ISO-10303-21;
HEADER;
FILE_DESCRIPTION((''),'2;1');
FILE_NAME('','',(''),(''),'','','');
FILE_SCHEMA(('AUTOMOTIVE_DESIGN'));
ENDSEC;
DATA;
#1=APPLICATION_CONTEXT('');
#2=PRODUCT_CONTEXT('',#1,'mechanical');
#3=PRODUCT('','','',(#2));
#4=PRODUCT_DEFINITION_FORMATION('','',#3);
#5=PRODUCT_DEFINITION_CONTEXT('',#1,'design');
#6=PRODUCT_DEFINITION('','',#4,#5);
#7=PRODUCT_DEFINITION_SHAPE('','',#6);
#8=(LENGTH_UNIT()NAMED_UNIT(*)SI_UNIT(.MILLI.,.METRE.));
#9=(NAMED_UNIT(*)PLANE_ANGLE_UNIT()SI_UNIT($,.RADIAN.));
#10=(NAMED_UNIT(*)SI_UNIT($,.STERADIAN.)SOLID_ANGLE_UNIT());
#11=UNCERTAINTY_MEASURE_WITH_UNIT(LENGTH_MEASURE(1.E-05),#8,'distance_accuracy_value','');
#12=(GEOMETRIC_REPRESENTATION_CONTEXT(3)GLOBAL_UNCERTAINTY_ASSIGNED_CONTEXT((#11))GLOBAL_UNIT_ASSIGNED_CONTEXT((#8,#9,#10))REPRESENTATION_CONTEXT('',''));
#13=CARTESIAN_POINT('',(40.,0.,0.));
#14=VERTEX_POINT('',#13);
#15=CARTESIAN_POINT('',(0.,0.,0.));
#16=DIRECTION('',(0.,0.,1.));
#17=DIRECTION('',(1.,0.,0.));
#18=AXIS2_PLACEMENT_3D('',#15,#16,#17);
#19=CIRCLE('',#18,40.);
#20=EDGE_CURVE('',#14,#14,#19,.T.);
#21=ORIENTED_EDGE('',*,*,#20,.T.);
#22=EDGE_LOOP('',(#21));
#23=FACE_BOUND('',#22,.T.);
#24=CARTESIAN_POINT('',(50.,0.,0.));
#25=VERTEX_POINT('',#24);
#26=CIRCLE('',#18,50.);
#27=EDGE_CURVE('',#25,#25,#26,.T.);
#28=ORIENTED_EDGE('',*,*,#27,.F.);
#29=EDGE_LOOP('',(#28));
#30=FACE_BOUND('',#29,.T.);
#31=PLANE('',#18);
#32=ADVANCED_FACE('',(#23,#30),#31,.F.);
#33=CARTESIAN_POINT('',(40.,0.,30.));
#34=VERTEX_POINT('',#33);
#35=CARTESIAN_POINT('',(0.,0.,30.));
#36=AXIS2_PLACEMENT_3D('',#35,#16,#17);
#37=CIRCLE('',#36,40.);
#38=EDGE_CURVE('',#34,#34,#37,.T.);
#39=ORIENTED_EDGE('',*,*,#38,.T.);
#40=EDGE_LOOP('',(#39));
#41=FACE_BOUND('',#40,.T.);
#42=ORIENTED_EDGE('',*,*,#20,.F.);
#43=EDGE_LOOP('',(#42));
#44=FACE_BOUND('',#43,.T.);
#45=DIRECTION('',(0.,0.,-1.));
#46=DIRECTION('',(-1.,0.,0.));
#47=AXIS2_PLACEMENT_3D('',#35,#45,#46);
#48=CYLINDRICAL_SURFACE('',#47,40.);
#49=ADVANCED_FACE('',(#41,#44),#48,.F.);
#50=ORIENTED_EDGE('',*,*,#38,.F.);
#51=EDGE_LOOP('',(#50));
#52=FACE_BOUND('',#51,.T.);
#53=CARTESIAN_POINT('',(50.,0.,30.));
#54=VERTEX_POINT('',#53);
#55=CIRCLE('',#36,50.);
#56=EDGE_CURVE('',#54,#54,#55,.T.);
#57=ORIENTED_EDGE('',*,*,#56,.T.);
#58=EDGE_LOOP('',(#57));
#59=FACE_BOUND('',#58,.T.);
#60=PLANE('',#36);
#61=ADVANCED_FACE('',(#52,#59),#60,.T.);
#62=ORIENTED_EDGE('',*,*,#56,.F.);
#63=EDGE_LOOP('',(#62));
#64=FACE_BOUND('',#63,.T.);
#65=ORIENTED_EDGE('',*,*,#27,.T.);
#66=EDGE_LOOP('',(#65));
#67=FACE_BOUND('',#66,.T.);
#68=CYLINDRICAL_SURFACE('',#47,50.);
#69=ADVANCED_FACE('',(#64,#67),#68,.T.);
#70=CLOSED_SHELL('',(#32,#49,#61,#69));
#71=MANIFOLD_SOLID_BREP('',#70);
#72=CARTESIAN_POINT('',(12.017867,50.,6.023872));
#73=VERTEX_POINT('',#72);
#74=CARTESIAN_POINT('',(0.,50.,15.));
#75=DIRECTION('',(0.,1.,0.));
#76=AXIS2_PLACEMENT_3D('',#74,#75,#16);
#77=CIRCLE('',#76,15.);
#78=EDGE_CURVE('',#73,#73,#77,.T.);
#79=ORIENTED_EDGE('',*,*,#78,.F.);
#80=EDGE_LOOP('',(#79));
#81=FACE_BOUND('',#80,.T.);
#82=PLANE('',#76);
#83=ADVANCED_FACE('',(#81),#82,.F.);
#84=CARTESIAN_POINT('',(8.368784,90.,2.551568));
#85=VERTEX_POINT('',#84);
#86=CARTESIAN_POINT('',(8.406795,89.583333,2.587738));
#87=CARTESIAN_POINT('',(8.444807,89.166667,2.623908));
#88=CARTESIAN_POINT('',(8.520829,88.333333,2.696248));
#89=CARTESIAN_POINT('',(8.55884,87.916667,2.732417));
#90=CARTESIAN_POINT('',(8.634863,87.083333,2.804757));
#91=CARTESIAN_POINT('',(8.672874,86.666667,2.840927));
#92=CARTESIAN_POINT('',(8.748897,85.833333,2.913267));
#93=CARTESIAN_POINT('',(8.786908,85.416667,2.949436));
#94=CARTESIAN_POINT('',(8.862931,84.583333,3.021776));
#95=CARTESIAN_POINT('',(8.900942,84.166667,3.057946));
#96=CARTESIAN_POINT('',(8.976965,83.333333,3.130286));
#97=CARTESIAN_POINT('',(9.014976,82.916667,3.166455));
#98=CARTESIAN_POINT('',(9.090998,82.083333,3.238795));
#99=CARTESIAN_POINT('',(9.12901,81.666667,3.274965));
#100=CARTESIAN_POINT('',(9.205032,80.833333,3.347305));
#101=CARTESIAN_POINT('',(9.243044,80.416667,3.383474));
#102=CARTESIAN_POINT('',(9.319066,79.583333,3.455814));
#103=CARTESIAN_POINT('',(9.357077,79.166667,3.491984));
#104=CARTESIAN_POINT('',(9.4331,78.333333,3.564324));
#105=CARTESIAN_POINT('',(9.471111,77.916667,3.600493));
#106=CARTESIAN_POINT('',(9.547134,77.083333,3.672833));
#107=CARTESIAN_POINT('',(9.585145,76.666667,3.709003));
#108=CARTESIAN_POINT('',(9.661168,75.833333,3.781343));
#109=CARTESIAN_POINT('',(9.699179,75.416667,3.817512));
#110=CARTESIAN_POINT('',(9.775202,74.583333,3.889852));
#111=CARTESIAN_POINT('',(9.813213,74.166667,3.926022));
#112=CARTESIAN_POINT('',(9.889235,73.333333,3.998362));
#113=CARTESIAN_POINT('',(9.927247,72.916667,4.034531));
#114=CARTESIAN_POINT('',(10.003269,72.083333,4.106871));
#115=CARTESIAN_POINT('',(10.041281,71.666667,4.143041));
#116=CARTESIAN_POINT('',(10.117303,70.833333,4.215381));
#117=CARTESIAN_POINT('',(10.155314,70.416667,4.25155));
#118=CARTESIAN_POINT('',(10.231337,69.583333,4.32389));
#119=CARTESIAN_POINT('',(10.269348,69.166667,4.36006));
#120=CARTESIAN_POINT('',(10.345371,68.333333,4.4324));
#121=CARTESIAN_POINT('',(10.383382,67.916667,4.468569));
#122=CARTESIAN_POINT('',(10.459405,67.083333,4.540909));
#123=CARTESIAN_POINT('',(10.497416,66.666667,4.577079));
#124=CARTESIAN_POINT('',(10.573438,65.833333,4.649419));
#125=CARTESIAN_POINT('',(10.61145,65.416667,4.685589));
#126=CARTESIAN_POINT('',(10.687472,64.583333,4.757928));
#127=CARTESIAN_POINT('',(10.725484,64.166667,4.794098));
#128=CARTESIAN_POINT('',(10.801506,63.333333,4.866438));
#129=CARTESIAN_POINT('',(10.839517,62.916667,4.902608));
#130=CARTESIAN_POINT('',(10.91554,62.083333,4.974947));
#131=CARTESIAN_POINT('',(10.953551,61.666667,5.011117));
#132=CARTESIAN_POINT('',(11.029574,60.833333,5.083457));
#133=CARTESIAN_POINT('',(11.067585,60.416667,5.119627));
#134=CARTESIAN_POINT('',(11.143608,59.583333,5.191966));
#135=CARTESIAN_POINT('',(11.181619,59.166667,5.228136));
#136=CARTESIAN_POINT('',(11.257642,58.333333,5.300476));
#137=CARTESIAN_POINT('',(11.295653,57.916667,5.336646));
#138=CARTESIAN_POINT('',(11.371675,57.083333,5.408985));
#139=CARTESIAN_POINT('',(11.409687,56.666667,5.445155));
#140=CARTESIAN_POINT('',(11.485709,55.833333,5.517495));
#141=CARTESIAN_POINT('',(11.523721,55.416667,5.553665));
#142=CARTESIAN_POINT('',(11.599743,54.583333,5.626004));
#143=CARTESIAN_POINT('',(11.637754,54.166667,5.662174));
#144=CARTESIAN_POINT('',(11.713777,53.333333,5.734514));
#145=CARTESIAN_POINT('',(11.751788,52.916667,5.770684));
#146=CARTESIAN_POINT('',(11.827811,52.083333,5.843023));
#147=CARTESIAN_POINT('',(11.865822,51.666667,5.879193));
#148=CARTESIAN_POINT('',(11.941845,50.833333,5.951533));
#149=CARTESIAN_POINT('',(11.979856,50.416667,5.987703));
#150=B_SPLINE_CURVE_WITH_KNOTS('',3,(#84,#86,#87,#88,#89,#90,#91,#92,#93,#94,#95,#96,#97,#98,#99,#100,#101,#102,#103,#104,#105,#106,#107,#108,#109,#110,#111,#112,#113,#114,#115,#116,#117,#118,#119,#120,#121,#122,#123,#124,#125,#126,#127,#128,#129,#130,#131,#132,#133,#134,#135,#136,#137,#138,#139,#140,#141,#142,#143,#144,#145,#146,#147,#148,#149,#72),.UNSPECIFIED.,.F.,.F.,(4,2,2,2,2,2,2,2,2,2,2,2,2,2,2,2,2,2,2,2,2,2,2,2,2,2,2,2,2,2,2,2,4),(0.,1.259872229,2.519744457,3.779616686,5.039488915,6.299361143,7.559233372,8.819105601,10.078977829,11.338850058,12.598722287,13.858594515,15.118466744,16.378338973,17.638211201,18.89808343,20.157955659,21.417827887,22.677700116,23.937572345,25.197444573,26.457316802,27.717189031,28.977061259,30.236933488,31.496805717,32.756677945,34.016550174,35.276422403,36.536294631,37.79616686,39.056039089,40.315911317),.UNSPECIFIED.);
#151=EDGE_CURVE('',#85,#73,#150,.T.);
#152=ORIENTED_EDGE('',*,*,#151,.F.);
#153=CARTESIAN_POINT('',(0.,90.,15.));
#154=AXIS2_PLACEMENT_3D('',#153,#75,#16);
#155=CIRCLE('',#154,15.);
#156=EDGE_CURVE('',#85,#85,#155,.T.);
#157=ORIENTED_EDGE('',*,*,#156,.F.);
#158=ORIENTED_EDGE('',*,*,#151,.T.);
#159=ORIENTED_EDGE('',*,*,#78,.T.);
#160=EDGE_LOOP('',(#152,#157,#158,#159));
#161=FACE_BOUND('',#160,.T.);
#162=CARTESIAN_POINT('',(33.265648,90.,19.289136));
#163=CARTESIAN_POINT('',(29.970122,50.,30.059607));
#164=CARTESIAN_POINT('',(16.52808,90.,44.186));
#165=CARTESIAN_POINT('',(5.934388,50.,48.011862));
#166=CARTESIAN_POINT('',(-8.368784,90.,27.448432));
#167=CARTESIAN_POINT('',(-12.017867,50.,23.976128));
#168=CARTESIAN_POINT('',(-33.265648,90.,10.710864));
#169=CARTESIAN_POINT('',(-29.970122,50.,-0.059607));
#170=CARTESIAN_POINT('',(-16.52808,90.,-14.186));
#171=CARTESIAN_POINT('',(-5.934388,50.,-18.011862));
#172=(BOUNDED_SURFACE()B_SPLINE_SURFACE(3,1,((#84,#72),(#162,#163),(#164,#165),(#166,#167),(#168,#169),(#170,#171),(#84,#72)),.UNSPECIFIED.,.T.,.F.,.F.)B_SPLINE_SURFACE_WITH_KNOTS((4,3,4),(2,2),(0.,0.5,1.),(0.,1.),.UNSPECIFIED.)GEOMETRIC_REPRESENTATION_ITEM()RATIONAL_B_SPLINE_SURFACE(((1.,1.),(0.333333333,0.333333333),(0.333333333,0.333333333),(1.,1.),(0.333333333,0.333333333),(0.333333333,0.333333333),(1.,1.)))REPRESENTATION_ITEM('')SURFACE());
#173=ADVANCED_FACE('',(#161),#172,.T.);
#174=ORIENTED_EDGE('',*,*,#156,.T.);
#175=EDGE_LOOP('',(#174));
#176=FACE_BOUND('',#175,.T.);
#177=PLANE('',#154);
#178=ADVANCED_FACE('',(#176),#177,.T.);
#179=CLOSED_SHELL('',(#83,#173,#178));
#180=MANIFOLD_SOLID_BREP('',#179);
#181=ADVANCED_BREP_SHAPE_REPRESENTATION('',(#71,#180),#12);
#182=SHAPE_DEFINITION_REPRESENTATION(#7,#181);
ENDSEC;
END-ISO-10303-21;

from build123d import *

# Parameters (mm, degrees)
SKETCH1_R           = 50
SKETCH1_R_2         = 40
BOSS_EXTRUDE1_DEPTH = 30


with BuildPart() as part:
    # Sketch1 → Boss-Extrude1 (new body)
    with BuildSketch(Plane.XY):
        Circle(SKETCH1_R)
        Circle(SKETCH1_R_2, mode=Mode.SUBTRACT)
    extrude(amount=BOSS_EXTRUDE1_DEPTH)


with BuildPart() as body_2:
    # Loft1: read off the stored shape, not the designer's step
    # Loft1: loft between two sections, ruled curve by curve
    loft1_from = [
        Edge.make_bspline([(8.368784012, 90, 2.551568205), (33.265647603, 90, 19.289136228), (16.528079579, 90, 44.185999819), (-8.368784012, 90, 27.448431795), (-33.265647603, 90, 10.710863772), (-16.528079579, 90, -14.185999819), (8.368784012, 90, 2.551568205)], [0, 0, 0, 0, 0.5, 0.5, 0.5, 1, 1, 1, 1], 3, [1, 0.333333333, 0.333333333, 1, 0.333333333, 0.333333333, 1]),
    ]
    loft1_to = [
        Edge.make_bspline([(12.017867278, 50, 6.023872434), (29.97012241, 50, 30.059606991), (5.934387853, 50, 48.011862123), (-12.017867278, 50, 23.976127566), (-29.97012241, 50, -0.059606991), (-5.934387853, 50, -18.011862123), (12.017867278, 50, 6.023872434)], [0, 0, 0, 0, 0.5, 0.5, 0.5, 1, 1, 1, 1], 3, [1, 0.333333333, 0.333333333, 1, 0.333333333, 0.333333333, 1]),
    ]
    loft1 = Solid(Shell([*[Face.make_surface_from_curves(loft1_from[k], loft1_to[k]) for k in range(1)], Face(Wire(loft1_from)), Face(Wire(loft1_to))]))
    add(loft1)


solid = Compound([part.part, body_2.part])
